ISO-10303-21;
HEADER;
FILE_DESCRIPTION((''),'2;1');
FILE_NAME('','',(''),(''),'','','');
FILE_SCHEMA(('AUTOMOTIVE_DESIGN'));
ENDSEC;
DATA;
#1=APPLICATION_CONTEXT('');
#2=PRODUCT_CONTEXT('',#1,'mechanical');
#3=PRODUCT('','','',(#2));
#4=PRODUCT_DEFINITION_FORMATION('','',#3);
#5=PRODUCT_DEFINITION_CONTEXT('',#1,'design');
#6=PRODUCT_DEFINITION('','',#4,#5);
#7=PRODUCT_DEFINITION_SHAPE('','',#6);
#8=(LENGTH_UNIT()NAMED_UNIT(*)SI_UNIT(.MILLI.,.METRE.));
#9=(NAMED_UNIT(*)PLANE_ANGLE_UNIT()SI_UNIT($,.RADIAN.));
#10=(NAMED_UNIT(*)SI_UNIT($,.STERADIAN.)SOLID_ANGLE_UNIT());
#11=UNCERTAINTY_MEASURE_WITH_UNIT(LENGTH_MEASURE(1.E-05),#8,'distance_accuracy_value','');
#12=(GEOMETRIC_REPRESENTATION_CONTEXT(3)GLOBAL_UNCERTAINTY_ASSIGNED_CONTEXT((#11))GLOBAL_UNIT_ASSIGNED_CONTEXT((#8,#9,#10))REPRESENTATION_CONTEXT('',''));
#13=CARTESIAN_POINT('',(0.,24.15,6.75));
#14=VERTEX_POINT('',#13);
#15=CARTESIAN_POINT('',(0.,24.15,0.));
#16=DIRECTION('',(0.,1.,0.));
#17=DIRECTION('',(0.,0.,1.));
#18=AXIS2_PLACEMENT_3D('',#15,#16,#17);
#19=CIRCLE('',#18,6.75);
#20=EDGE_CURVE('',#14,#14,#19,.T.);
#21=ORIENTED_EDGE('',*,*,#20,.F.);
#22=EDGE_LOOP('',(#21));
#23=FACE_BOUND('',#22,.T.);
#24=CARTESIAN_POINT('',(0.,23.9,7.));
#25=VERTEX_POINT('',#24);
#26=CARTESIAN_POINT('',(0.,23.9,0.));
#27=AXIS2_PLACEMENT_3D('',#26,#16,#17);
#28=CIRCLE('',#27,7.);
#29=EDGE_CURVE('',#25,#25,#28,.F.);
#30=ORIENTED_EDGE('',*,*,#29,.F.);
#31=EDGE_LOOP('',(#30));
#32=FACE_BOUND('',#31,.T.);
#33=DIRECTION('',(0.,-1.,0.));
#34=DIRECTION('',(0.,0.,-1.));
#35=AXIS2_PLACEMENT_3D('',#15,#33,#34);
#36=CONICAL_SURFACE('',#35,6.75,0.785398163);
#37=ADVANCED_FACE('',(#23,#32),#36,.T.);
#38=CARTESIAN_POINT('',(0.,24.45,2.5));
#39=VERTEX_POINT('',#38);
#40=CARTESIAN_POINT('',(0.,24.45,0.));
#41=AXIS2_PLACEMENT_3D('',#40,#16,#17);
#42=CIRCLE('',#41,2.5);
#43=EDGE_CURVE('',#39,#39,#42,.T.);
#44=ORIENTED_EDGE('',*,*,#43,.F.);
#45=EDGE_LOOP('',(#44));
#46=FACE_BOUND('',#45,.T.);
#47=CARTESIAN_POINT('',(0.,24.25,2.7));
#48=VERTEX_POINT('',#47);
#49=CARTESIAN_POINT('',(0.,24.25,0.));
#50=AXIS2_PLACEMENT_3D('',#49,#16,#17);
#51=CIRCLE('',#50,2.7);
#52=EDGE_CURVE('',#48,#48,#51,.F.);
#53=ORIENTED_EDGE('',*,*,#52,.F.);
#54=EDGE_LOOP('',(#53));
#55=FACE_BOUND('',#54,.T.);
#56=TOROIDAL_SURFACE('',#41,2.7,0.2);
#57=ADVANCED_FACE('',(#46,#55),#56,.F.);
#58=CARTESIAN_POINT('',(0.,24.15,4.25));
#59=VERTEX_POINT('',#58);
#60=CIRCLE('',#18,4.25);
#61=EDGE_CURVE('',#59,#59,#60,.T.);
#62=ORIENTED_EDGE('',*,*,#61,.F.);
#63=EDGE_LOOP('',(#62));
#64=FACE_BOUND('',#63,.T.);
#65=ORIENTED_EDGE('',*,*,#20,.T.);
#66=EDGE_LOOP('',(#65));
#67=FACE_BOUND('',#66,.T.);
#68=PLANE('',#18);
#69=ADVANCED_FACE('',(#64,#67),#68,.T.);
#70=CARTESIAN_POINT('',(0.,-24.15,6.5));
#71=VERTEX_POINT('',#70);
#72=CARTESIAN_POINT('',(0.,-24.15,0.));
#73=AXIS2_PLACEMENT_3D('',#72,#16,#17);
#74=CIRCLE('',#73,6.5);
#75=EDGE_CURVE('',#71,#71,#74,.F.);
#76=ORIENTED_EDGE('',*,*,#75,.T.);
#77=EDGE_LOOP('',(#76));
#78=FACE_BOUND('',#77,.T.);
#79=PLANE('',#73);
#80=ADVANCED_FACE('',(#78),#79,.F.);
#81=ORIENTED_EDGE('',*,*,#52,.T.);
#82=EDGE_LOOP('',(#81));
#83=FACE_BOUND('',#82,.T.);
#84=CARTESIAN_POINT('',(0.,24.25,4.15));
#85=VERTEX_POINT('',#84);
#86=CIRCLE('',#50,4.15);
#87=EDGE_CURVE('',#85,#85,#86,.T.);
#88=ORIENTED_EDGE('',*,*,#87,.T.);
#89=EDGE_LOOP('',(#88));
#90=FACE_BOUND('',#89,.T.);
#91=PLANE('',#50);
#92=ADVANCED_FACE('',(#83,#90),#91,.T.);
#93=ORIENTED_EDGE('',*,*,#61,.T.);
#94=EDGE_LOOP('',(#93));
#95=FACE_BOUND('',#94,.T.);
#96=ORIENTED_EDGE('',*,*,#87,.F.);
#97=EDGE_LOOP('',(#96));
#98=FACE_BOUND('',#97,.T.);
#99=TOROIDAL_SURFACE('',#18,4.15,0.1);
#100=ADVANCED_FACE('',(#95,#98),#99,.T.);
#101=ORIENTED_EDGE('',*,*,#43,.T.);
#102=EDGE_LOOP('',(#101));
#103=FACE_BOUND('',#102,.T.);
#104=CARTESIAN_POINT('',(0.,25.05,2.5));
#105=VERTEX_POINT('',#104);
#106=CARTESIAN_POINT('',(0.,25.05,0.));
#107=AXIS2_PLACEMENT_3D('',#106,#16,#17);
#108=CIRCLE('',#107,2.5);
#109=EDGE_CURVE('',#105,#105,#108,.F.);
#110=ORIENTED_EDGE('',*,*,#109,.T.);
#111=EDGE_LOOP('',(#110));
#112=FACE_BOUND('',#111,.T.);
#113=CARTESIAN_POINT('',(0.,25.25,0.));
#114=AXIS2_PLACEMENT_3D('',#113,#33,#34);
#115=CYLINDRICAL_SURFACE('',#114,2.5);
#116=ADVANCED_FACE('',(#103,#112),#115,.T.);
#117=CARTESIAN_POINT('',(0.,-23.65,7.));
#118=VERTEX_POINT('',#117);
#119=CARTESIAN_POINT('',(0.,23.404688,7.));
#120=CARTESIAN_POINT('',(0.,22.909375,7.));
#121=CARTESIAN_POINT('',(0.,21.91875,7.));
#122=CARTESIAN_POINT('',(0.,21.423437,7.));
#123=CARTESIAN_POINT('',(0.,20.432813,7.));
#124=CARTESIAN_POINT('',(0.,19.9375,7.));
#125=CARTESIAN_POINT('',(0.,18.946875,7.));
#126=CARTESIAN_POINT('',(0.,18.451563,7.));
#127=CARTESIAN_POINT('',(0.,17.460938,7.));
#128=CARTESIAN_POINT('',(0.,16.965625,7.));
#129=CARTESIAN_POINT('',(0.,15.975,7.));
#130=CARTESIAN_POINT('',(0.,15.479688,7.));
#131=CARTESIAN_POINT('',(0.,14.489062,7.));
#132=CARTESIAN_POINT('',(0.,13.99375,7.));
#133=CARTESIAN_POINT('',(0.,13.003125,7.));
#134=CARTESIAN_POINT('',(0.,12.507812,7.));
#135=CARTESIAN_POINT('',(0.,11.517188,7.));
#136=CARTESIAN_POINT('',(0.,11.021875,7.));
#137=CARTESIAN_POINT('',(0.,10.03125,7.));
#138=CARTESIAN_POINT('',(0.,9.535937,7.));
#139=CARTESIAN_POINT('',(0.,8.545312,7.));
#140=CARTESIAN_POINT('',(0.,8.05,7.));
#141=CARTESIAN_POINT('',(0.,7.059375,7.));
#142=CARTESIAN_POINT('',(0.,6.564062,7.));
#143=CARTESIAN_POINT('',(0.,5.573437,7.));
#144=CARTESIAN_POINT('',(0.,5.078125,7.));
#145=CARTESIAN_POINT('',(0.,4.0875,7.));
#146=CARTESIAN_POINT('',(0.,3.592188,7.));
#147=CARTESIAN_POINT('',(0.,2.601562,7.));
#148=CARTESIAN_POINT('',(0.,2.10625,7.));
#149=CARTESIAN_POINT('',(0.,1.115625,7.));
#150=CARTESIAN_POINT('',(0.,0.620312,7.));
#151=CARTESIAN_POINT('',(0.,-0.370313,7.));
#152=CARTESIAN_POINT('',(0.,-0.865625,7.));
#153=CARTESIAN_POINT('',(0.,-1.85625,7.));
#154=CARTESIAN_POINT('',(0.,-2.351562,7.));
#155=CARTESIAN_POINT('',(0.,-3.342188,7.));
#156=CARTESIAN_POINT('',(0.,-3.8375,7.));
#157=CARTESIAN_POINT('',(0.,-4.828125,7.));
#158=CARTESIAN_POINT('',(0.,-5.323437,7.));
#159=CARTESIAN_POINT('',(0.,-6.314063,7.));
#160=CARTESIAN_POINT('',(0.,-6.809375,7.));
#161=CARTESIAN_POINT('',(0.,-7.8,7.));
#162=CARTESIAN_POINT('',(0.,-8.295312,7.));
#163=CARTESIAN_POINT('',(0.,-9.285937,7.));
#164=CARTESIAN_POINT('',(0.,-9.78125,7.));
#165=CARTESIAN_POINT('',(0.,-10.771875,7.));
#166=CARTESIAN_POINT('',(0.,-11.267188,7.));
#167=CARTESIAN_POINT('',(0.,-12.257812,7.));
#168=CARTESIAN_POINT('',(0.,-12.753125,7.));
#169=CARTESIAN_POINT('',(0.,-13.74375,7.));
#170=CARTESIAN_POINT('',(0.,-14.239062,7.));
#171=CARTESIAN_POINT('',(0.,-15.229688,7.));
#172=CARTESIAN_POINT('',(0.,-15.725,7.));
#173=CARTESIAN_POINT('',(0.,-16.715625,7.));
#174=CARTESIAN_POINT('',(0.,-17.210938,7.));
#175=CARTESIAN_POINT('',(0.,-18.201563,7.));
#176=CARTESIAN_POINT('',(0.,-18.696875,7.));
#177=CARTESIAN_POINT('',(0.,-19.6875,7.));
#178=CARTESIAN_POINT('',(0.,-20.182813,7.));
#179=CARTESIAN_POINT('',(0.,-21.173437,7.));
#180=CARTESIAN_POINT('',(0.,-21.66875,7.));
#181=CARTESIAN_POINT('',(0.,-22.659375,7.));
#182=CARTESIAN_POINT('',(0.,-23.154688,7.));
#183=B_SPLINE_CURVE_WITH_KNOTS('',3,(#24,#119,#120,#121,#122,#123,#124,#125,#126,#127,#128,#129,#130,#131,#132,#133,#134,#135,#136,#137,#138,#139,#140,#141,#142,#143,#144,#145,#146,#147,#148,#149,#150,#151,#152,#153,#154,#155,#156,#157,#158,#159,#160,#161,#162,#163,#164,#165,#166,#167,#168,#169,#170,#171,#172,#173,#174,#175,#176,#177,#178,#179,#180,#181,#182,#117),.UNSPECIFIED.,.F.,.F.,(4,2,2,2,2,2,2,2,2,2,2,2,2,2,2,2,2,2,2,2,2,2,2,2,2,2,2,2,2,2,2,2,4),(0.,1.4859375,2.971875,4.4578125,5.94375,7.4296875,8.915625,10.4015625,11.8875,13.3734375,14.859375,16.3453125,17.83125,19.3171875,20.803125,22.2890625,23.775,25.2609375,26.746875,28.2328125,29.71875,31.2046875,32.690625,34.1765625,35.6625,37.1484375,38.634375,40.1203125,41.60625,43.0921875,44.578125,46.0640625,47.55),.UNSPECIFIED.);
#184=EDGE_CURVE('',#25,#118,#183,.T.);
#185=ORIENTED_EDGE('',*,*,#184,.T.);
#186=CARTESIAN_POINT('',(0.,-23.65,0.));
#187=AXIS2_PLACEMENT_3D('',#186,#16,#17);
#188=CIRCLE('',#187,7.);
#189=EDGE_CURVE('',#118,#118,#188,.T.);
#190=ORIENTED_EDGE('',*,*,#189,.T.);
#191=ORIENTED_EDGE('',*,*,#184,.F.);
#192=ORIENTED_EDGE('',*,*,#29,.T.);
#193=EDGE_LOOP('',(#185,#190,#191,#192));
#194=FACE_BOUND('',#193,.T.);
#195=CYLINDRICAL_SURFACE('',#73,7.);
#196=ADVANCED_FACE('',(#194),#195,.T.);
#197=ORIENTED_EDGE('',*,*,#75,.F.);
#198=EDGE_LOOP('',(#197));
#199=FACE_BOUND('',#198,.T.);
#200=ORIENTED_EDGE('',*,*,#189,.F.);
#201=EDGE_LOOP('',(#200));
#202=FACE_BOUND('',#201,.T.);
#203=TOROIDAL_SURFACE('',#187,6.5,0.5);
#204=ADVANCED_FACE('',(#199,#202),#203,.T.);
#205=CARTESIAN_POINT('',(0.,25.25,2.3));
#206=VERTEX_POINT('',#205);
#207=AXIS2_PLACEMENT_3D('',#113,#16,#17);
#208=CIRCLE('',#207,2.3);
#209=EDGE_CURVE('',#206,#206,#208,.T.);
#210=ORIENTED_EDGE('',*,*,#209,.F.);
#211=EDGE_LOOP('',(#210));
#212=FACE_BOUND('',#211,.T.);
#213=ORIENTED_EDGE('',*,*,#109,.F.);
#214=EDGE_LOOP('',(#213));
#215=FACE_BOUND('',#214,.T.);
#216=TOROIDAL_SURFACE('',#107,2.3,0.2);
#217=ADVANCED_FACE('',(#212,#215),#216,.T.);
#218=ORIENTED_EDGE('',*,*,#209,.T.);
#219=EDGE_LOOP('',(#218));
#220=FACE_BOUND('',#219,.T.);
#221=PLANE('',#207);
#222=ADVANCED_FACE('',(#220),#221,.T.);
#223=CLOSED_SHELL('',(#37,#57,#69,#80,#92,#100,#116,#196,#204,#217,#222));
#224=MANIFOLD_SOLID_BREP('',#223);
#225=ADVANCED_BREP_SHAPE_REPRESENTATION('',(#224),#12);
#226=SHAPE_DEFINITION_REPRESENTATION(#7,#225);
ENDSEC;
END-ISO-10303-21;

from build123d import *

# Parameters (mm, degrees)
BOSS_EXTRUDE1_DEPTH      = 24.15
BOSS_EXTRUDE1_DEPTH_BACK = 24.15
SKETCH1_R                = 7
FILLET1_R                = 0.5
CHAMFER1_SIZE            = 0.25
SKETCH2_R                = 4.25
BOSS_EXTRUDE2_DEPTH      = 0.1
FILLET2_R                = 0.1
SKETCH3_R                = 2.5
BOSS_EXTRUDE3_DEPTH      = 1
FILLET3_R                = 0.2
FILLET4_R                = 0.2


with BuildPart() as part:
    # Sketch1 → Boss-Extrude1 (new, two sides: drawn at the far end of the back side and taken through both)
    with BuildSketch(Plane(origin=(0, 0, 0), x_dir=(1, 0, 0), z_dir=(0, 1, 0)).offset(-BOSS_EXTRUDE1_DEPTH_BACK)):
        with Locations(Location((0, 0, 0), (0, 0, 270))):
            Circle(SKETCH1_R)
    extrude(amount=BOSS_EXTRUDE1_DEPTH + BOSS_EXTRUDE1_DEPTH_BACK)

    # Fillet1
    fillet1_edges = [part.edges().sort_by_distance(p)[0] for p in [
        (0, -24.15, -7),
    ]]
    fillet(fillet1_edges, radius=FILLET1_R)

    # Chamfer1
    chamfer1_edges = [part.edges().sort_by_distance(p)[0] for p in [
        (0, 24.15, -7),
    ]]
    chamfer(chamfer1_edges, length=CHAMFER1_SIZE)

    # Sketch2 → Boss-Extrude2 (add)
    with BuildSketch(Plane(origin=(0, 24.15, 0), x_dir=(1, 0, 0), z_dir=(0, 1, 0))):
        with Locations(Location((0, 0, 0), (0, 0, 270))):
            Circle(SKETCH2_R)
    extrude(amount=BOSS_EXTRUDE2_DEPTH)

    # Fillet2
    fillet2_edges = [part.edges().sort_by_distance(p)[0] for p in [
        (0, 24.25, -4.25),
    ]]
    fillet(fillet2_edges, radius=FILLET2_R - 0.0001)  # a hair under: the kernel refuses the full size

    # Sketch3 → Boss-Extrude3 (add)
    with BuildSketch(Plane(origin=(0, 24.25, 0), x_dir=(1, 0, 0), z_dir=(0, 1, 0))):
        with Locations(Location((0, 0, 0), (0, 0, 270))):
            Circle(SKETCH3_R)
    extrude(amount=BOSS_EXTRUDE3_DEPTH)

    # Fillet3
    fillet3_edges = [part.edges().sort_by_distance(p)[0] for p in [
        (0, 24.25, -2.5),
    ]]
    fillet(fillet3_edges, radius=FILLET3_R)

    # Fillet4
    fillet4_edges = [part.edges().sort_by_distance(p)[0] for p in [
        (0, 25.25, -2.5),
    ]]
    fillet(fillet4_edges, radius=FILLET4_R)


solid = part.part
